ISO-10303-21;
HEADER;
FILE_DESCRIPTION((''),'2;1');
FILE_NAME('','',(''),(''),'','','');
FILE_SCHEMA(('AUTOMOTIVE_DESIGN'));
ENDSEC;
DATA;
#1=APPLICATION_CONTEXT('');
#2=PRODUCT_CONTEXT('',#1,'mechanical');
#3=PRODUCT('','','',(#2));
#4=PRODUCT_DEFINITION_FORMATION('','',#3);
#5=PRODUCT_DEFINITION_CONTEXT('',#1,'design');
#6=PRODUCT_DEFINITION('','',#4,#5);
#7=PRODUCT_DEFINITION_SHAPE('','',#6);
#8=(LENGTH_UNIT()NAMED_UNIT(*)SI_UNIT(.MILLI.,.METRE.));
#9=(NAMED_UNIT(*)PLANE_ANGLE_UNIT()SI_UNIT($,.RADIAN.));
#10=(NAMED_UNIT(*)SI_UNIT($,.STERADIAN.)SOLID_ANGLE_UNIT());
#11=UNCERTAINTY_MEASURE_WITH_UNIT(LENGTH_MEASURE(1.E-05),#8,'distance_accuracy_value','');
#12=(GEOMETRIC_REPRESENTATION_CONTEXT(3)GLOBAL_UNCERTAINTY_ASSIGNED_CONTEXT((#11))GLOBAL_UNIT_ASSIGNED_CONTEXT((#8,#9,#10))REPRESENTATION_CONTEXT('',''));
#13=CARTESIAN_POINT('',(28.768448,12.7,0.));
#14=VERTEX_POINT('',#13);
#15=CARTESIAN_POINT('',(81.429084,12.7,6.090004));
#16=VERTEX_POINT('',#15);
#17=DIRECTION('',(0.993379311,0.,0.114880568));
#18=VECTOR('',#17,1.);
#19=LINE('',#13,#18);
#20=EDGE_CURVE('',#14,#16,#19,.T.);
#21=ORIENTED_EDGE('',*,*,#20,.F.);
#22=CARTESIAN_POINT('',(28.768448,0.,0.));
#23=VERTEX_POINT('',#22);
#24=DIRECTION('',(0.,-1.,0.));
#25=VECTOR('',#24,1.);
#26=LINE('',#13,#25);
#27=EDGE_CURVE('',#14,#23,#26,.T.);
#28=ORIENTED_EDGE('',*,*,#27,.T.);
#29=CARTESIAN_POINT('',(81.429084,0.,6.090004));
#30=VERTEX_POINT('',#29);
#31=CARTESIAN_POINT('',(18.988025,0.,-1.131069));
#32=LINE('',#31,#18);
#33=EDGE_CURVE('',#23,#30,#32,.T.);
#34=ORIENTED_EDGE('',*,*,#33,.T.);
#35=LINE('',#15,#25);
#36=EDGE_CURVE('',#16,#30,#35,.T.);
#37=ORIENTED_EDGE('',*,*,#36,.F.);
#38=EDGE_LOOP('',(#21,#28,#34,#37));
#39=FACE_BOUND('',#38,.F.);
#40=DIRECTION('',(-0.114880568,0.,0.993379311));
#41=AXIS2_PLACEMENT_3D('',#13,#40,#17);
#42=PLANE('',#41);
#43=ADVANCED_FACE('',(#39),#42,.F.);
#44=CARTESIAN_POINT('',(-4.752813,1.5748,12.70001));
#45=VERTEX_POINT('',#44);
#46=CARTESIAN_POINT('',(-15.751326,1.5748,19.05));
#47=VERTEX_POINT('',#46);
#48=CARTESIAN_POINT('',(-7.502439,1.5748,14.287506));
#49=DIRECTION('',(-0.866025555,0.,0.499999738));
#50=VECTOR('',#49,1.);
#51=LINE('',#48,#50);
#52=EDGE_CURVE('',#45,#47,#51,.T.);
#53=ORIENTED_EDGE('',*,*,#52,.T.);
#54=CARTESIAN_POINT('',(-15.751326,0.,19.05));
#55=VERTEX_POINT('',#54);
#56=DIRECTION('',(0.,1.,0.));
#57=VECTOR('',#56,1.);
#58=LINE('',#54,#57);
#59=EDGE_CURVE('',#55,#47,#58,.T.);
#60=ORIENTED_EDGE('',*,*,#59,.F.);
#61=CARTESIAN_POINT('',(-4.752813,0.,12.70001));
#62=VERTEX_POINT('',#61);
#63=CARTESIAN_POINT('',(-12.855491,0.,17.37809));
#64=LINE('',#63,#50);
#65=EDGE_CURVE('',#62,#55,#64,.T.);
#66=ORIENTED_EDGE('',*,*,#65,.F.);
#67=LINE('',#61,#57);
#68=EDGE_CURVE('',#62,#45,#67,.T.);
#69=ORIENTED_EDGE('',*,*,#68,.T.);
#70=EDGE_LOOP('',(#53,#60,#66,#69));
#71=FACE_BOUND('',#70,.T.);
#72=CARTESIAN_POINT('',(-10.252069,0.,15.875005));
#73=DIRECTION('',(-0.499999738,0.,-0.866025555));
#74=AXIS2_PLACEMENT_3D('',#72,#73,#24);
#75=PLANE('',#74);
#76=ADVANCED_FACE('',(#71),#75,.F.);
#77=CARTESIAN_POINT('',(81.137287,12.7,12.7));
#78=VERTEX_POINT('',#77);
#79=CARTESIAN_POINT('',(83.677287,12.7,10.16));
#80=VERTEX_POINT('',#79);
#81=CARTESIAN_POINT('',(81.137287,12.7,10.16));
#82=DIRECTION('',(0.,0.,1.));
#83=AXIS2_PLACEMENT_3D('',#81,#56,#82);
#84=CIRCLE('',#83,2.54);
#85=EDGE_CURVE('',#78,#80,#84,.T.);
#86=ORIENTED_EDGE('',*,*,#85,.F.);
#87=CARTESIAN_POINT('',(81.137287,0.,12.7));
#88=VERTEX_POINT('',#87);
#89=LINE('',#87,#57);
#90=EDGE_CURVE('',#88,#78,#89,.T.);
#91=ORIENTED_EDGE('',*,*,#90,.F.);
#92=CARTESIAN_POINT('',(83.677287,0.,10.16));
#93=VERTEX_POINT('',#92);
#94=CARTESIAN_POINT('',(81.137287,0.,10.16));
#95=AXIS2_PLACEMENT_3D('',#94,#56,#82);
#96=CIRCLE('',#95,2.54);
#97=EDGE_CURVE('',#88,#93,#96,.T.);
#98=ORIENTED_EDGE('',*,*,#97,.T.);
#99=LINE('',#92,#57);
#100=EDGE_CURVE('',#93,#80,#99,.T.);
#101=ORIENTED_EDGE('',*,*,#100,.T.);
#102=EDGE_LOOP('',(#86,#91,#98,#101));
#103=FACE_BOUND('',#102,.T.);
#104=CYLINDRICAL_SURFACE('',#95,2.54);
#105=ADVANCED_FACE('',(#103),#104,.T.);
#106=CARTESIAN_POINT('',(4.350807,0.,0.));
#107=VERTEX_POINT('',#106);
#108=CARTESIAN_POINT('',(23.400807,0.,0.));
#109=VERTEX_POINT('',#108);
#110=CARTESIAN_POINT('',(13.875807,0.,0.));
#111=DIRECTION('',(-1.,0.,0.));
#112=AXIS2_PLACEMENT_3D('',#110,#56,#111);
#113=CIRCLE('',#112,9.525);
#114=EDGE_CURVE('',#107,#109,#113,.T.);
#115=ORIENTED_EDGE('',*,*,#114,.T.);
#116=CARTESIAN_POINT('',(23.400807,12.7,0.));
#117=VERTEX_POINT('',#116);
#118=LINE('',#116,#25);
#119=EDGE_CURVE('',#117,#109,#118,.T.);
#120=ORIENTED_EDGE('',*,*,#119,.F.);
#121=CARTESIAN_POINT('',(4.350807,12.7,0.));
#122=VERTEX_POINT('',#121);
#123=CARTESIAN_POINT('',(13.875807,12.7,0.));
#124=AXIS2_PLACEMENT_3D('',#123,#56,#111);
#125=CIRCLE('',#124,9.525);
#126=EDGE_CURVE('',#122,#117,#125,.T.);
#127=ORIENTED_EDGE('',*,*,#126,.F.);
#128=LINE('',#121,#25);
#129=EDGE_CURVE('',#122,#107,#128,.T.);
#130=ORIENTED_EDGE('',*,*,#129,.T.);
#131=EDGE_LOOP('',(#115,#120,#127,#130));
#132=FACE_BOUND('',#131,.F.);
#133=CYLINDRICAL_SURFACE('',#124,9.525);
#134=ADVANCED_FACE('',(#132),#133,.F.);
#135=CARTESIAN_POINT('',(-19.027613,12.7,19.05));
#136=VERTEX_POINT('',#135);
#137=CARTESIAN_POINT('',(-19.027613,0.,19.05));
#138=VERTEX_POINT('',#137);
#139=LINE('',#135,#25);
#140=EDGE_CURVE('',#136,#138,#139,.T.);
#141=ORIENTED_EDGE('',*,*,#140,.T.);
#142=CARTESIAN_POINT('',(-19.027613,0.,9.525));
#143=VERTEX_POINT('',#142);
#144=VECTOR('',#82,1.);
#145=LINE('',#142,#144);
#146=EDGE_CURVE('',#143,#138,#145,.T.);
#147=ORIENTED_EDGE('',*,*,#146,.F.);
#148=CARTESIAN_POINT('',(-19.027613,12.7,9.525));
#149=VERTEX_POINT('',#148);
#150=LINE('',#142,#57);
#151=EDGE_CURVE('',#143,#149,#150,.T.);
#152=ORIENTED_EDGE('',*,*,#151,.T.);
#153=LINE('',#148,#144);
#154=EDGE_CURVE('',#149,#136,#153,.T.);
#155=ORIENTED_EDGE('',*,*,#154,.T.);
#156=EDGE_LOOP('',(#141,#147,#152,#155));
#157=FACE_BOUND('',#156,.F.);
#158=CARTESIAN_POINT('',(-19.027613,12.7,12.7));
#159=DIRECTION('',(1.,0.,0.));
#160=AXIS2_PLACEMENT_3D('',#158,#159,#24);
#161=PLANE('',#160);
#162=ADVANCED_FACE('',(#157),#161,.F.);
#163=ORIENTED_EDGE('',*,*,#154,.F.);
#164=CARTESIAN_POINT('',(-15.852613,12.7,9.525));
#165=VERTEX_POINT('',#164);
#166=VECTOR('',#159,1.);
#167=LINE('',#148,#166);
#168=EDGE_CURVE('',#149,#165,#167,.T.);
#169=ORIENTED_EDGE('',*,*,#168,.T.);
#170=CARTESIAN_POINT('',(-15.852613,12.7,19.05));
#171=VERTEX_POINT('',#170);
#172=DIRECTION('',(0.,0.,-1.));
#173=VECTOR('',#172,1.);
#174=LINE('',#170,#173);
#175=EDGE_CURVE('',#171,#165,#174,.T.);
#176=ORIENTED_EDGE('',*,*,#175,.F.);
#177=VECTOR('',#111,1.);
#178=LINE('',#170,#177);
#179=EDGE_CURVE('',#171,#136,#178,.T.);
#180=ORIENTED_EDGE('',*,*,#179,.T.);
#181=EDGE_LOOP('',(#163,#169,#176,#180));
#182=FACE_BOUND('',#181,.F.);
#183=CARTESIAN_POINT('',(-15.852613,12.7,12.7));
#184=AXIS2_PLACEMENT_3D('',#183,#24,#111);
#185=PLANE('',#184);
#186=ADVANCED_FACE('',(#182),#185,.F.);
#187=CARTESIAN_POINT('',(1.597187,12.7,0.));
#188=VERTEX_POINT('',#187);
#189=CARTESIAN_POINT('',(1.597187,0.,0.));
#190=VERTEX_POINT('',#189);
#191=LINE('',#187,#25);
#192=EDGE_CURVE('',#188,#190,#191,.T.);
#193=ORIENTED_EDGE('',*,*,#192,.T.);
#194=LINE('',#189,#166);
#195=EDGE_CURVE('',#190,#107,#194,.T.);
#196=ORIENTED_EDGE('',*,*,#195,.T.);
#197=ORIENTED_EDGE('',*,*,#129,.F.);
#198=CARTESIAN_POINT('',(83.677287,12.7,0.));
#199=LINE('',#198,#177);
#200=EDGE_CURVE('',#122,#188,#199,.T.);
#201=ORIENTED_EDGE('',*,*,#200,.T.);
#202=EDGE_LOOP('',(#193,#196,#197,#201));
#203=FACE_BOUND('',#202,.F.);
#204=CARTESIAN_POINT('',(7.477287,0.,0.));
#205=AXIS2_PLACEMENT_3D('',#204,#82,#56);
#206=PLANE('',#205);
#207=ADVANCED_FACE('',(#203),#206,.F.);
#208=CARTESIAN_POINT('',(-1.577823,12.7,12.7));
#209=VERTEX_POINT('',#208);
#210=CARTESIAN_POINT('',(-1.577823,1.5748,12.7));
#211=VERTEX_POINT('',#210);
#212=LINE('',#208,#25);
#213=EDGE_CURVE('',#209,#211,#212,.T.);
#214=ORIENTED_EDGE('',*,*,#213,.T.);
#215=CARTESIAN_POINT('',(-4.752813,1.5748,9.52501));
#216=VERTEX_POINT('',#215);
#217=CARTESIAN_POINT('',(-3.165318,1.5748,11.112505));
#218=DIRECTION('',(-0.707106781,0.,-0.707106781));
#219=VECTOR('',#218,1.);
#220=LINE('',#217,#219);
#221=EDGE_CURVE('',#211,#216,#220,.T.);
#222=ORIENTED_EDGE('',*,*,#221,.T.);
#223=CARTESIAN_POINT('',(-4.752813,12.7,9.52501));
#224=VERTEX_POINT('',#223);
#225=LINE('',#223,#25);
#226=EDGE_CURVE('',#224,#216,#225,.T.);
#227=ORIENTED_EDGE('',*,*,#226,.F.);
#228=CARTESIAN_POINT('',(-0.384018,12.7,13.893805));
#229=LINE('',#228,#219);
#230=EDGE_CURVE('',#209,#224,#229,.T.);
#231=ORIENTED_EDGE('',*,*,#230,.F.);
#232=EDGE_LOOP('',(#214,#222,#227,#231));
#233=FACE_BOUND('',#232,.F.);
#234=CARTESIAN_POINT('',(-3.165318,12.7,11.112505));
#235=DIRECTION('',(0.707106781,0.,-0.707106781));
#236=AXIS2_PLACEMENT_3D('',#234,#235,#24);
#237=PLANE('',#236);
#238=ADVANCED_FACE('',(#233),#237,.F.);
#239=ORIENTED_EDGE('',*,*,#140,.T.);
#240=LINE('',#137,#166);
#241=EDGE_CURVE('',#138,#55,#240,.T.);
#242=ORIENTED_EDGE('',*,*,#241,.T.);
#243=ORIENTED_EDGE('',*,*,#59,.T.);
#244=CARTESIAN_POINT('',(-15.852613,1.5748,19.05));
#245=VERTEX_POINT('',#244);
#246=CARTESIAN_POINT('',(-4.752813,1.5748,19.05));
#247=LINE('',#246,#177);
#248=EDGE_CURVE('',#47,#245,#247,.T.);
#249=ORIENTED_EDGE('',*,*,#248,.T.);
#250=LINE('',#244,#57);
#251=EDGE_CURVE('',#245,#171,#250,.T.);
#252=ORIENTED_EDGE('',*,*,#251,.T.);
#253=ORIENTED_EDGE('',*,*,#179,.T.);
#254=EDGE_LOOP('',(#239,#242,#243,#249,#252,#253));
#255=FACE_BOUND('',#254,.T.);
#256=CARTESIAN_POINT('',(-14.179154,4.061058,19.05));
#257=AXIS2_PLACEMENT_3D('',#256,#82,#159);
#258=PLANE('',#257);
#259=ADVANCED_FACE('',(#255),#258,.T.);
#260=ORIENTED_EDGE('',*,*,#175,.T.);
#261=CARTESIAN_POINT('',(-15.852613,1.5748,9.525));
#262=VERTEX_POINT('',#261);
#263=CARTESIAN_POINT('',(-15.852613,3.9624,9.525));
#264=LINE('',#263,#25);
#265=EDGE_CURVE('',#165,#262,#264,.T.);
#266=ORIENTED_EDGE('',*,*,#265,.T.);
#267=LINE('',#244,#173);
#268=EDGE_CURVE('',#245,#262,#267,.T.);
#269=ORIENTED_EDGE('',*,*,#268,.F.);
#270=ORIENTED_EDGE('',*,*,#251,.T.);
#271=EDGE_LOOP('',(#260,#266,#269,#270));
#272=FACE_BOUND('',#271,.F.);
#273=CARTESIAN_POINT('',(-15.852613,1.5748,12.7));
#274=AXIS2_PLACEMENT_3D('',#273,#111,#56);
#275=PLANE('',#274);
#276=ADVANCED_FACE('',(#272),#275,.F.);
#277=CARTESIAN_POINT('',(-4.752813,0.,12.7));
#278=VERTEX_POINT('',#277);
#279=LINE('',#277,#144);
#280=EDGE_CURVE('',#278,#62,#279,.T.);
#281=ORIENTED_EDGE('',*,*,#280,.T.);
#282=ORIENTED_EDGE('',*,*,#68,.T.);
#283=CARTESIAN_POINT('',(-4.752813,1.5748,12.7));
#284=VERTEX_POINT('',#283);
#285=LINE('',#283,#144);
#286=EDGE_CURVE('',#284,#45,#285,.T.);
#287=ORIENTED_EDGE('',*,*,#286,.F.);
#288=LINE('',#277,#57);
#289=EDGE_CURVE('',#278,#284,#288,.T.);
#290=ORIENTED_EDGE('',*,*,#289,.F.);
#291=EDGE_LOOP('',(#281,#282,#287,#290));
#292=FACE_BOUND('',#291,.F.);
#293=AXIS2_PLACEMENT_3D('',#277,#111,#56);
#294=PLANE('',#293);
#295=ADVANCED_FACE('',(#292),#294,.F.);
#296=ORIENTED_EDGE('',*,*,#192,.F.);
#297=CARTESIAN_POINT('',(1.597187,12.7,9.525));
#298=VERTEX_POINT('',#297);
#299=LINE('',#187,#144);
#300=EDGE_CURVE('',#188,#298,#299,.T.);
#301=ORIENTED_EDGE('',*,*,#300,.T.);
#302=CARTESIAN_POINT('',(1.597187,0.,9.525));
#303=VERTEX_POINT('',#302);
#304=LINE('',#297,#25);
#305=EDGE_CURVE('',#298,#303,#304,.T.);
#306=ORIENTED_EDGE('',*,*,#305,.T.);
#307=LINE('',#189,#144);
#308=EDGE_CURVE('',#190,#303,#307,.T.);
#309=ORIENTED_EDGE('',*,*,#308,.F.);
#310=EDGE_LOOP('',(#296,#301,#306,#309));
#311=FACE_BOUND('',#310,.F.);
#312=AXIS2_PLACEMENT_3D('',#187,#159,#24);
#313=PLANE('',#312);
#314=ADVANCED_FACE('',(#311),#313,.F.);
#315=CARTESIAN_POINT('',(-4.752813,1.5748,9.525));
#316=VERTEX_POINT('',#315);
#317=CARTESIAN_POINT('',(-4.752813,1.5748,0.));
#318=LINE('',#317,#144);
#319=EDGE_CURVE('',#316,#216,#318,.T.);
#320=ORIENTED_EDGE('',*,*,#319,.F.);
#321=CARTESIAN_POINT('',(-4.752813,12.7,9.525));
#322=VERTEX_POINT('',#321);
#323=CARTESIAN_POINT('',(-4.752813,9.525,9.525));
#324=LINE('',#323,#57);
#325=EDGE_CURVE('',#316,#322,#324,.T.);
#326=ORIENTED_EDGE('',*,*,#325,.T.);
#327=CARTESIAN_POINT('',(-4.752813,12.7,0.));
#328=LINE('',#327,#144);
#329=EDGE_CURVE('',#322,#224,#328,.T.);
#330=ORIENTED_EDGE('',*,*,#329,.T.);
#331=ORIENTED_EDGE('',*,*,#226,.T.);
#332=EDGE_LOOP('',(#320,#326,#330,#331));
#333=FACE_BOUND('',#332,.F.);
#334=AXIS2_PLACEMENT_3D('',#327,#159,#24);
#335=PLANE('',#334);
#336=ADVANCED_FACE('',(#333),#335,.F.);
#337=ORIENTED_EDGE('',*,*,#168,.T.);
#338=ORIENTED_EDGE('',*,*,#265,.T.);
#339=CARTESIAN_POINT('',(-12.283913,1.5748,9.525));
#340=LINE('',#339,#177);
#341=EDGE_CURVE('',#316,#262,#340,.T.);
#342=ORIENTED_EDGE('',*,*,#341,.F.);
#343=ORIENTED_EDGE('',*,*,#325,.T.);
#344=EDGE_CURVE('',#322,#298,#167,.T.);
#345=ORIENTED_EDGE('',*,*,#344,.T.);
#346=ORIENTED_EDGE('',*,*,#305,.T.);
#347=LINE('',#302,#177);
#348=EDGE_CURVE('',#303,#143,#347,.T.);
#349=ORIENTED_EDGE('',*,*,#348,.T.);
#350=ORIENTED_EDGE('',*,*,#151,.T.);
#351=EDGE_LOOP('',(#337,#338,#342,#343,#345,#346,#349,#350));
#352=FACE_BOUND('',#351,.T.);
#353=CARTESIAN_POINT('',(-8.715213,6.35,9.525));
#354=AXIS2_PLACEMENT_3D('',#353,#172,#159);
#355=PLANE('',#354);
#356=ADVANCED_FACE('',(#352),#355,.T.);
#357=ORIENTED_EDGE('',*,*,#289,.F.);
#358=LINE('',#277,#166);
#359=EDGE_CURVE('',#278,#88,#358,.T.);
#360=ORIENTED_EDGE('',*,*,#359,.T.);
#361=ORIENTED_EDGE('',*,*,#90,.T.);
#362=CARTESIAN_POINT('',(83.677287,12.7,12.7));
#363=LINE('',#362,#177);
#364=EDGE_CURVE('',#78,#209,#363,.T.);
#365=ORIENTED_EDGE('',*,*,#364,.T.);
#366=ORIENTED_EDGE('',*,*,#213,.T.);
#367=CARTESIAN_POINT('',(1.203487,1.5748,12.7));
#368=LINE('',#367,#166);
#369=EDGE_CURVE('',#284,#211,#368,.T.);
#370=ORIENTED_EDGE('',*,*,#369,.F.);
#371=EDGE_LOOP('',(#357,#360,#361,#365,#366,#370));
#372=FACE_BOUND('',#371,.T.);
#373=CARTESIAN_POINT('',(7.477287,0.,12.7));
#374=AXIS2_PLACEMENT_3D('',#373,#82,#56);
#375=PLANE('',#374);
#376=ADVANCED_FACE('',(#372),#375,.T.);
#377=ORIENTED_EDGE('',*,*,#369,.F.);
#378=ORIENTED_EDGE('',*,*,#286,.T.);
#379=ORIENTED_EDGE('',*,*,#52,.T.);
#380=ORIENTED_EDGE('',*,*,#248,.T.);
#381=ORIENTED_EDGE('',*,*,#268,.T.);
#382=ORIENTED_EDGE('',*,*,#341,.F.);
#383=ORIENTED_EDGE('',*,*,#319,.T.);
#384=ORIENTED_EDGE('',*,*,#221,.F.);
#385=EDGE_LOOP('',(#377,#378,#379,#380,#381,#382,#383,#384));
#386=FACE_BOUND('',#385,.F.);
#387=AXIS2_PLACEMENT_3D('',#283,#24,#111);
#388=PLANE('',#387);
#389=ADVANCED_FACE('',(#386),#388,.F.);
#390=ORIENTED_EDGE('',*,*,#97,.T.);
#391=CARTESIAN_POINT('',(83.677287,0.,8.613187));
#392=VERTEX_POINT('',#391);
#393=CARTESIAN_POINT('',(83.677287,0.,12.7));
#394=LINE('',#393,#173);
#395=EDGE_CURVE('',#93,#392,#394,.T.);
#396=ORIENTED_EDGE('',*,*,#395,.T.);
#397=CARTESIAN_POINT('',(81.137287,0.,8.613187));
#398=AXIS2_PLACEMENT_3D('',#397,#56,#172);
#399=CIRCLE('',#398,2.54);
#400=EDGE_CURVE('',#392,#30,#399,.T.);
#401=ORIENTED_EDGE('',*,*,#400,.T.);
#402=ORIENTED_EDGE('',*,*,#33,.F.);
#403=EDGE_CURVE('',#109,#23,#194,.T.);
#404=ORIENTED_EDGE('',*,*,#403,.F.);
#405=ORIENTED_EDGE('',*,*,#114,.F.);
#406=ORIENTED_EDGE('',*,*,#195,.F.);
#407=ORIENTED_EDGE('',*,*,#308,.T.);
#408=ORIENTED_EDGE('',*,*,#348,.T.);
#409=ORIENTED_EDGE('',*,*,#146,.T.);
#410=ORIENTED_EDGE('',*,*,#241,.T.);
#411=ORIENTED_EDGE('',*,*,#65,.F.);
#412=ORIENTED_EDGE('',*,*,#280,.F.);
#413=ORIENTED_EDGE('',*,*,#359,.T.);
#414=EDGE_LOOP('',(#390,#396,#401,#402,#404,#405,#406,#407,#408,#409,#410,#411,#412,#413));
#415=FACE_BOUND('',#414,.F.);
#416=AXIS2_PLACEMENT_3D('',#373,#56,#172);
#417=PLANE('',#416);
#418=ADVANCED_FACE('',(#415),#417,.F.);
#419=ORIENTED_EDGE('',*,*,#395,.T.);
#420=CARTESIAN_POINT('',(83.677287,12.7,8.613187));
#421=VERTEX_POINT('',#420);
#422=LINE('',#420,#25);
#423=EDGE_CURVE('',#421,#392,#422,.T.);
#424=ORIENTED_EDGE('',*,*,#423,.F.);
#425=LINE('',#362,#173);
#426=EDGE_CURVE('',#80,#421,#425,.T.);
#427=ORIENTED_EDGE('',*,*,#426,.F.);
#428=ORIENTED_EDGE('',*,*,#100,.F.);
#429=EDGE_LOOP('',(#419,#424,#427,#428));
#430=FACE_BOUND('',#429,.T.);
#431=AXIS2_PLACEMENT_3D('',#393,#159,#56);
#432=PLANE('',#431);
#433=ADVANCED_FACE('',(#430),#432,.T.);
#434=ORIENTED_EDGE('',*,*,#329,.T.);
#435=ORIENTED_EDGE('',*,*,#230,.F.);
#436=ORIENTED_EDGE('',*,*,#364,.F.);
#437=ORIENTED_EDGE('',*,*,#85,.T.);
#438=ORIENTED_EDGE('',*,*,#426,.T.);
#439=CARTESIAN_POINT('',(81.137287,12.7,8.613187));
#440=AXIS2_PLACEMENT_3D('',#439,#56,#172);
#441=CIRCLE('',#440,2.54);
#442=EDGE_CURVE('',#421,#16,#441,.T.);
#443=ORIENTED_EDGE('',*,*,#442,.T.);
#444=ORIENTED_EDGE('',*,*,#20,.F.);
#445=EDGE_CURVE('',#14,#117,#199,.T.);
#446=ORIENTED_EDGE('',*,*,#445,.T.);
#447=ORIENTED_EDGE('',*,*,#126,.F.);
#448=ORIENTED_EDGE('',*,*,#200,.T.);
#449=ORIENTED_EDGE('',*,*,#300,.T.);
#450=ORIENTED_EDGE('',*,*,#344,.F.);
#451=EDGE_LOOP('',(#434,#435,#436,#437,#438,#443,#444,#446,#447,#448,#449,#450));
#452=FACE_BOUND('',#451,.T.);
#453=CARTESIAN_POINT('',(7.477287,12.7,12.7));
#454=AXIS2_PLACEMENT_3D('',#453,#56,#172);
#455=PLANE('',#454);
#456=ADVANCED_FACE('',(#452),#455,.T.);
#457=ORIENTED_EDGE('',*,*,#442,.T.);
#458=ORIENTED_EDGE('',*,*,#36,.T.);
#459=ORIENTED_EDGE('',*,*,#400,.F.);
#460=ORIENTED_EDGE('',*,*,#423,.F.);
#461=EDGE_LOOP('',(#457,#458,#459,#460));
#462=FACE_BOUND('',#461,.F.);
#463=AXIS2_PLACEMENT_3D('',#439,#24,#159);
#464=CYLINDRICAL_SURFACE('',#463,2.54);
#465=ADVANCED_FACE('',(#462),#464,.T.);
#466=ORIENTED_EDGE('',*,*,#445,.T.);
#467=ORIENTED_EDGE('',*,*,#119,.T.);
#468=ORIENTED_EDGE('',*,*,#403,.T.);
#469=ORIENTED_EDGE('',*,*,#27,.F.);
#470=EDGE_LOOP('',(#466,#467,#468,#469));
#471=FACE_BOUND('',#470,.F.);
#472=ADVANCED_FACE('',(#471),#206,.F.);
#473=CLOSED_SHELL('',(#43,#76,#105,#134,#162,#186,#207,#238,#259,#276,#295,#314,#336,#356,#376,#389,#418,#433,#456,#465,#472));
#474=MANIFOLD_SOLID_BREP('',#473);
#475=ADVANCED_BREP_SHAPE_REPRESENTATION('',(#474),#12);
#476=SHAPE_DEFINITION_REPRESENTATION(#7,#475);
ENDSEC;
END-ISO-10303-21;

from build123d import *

# Parameters (mm, degrees)
F0_W      = 11.0998
F0_H      = 1.5748
F1_DEPTH  = 12.7
F3_DEPTH  = 9.525
F5_DEPTH  = 6.35
F6_SIZE2  = 10.998513
F6_SIZE   = 6.34999
F7_SIZE   = 3.17499
F8_SIZE   = 2.54
F9_W      = 15.0514596415
F9_H      = 12.7
F10_DEPTH = 25.4
F11_DEPTH = 76.2
F13_DEPTH = 25.4
F15_DEPTH = 25.4
F16_R     = 2.54


# Not quite as in the source:
# - a fillet or chamfer is up to 0.001 mm smaller than in the source, because OpenCascade refuses the exact size


with BuildPart() as f1:
    # F0 (on Top) → F1 (new body)
    with BuildSketch(Plane.XY):
        Polygon((19.0723874551, 12.7), (-4.7528125449, 12.7), (-4.7528125449, 1.5748), (-4.7528125449, 0), (19.0723874551, 0), align=None)
        Polygon((-15.8526125449, 12.7), (-19.0276125449, 12.7), (-19.0276125449, 0), (-15.8526125449, 0), (-15.8526125449, 1.5748), align=None)
        with Locations((-10.3027125449, 0.7874)):
            Rectangle(F0_W, F0_H)
    extrude(amount=F1_DEPTH)

    # F2 (on face) → F3 (cut)
    with BuildSketch(Plane(origin=(0, 0, 0), x_dir=(1, 0, 0), z_dir=(0, 0, -1))):
        Polygon((1.5971874551, -12.7), (1.5971874551, -1.5748), (1.5971874551, 0), (-19.0276125449, 0), (-19.0276125449, -12.7), align=None)
    extrude(amount=-F3_DEPTH, mode=Mode.SUBTRACT)

    # F4 (on face) → F5 (join)
    with BuildSketch(Plane.XY.offset(12.7)):
        Polygon((-15.8526125449, 12.7), (-19.0276125449, 12.7), (-19.0276125449, 0), (-4.7528125449, 0), (-4.7528125449, 1.5748), (-15.8526125449, 1.5748), align=None)
    extrude(amount=F5_DEPTH)

    # F6 (size 6.35 and 10.9985226281 in the source; OpenCascade refuses exactly that, so slightly less here)
    f6_edges = [f1.edges().sort_by_distance(p)[0] for p in [
        (-4.752813, 0.7874, 19.05),
    ]]
    f6_side = f1.faces().sort_by_distance((-4.752813, 0.7874, 15.875))[0]
    chamfer(f6_edges, length=F6_SIZE, length2=F6_SIZE2, reference=f6_side)

    # F7 (size 3.175 in the source; OpenCascade refuses exactly that, so slightly less here)
    f7_edges = [f1.edges().sort_by_distance(p)[0] for p in [
        (-4.752813, 7.1374, 12.7),
    ]]
    chamfer(f7_edges, length=F7_SIZE)

    # F8
    f8_edges = [f1.edges().sort_by_distance(p)[0] for p in [
        (19.072387, 6.35, 12.7),
        (19.072387, 6.35, 0),
        (19.072387, 12.7, 6.35),
    ]]
    chamfer(f8_edges, length=F8_SIZE)

    # F9 (on face) → F10 (cut)
    with BuildSketch(Plane.XY.offset(12.7)):
        with Locations((15.0030172759, 6.35)):
            Rectangle(F9_W, F9_H)
    extrude(amount=-F10_DEPTH, mode=Mode.SUBTRACT)

    # F11 (add): a face of the model
    f11_faces = [f1.faces().sort_by_distance(p)[0] for p in [
        (7.4772874551, 6.35, 6.35),
    ]]
    extrude(f11_faces, amount=F11_DEPTH)

    # F12 (on face) → F13 (cut)
    with BuildSketch(Plane(origin=(0, 12.7, 0), x_dir=(-1, 0, 0), z_dir=(0, 1, 0))):
        with BuildLine():
            Line((-23.4008067042, 0), (-4.3508067042, 0))
            ThreePointArc((-4.3508067042, 0), (-13.8758067042, 9.525), (-23.4008067042, 0))
        make_face()
    extrude(amount=-F13_DEPTH, mode=Mode.SUBTRACT)

    # F14 (on face) → F15 (cut)
    with BuildSketch(Plane(origin=(0, 12.7, 0), x_dir=(-1, 0, 0), z_dir=(0, 1, 0))):
        Polygon((-83.6772874551, 0), (-28.7684481591, 0), (-83.6772874551, 6.35), align=None)
    extrude(amount=-F15_DEPTH, mode=Mode.SUBTRACT)

    # F16
    f16_edges = [f1.edges().sort_by_distance(p)[0] for p in [
        (83.677287, 6.35, 12.7),
        (83.677287, 6.35, 6.35),
    ]]
    fillet(f16_edges, radius=F16_R)


solid = f1.part
